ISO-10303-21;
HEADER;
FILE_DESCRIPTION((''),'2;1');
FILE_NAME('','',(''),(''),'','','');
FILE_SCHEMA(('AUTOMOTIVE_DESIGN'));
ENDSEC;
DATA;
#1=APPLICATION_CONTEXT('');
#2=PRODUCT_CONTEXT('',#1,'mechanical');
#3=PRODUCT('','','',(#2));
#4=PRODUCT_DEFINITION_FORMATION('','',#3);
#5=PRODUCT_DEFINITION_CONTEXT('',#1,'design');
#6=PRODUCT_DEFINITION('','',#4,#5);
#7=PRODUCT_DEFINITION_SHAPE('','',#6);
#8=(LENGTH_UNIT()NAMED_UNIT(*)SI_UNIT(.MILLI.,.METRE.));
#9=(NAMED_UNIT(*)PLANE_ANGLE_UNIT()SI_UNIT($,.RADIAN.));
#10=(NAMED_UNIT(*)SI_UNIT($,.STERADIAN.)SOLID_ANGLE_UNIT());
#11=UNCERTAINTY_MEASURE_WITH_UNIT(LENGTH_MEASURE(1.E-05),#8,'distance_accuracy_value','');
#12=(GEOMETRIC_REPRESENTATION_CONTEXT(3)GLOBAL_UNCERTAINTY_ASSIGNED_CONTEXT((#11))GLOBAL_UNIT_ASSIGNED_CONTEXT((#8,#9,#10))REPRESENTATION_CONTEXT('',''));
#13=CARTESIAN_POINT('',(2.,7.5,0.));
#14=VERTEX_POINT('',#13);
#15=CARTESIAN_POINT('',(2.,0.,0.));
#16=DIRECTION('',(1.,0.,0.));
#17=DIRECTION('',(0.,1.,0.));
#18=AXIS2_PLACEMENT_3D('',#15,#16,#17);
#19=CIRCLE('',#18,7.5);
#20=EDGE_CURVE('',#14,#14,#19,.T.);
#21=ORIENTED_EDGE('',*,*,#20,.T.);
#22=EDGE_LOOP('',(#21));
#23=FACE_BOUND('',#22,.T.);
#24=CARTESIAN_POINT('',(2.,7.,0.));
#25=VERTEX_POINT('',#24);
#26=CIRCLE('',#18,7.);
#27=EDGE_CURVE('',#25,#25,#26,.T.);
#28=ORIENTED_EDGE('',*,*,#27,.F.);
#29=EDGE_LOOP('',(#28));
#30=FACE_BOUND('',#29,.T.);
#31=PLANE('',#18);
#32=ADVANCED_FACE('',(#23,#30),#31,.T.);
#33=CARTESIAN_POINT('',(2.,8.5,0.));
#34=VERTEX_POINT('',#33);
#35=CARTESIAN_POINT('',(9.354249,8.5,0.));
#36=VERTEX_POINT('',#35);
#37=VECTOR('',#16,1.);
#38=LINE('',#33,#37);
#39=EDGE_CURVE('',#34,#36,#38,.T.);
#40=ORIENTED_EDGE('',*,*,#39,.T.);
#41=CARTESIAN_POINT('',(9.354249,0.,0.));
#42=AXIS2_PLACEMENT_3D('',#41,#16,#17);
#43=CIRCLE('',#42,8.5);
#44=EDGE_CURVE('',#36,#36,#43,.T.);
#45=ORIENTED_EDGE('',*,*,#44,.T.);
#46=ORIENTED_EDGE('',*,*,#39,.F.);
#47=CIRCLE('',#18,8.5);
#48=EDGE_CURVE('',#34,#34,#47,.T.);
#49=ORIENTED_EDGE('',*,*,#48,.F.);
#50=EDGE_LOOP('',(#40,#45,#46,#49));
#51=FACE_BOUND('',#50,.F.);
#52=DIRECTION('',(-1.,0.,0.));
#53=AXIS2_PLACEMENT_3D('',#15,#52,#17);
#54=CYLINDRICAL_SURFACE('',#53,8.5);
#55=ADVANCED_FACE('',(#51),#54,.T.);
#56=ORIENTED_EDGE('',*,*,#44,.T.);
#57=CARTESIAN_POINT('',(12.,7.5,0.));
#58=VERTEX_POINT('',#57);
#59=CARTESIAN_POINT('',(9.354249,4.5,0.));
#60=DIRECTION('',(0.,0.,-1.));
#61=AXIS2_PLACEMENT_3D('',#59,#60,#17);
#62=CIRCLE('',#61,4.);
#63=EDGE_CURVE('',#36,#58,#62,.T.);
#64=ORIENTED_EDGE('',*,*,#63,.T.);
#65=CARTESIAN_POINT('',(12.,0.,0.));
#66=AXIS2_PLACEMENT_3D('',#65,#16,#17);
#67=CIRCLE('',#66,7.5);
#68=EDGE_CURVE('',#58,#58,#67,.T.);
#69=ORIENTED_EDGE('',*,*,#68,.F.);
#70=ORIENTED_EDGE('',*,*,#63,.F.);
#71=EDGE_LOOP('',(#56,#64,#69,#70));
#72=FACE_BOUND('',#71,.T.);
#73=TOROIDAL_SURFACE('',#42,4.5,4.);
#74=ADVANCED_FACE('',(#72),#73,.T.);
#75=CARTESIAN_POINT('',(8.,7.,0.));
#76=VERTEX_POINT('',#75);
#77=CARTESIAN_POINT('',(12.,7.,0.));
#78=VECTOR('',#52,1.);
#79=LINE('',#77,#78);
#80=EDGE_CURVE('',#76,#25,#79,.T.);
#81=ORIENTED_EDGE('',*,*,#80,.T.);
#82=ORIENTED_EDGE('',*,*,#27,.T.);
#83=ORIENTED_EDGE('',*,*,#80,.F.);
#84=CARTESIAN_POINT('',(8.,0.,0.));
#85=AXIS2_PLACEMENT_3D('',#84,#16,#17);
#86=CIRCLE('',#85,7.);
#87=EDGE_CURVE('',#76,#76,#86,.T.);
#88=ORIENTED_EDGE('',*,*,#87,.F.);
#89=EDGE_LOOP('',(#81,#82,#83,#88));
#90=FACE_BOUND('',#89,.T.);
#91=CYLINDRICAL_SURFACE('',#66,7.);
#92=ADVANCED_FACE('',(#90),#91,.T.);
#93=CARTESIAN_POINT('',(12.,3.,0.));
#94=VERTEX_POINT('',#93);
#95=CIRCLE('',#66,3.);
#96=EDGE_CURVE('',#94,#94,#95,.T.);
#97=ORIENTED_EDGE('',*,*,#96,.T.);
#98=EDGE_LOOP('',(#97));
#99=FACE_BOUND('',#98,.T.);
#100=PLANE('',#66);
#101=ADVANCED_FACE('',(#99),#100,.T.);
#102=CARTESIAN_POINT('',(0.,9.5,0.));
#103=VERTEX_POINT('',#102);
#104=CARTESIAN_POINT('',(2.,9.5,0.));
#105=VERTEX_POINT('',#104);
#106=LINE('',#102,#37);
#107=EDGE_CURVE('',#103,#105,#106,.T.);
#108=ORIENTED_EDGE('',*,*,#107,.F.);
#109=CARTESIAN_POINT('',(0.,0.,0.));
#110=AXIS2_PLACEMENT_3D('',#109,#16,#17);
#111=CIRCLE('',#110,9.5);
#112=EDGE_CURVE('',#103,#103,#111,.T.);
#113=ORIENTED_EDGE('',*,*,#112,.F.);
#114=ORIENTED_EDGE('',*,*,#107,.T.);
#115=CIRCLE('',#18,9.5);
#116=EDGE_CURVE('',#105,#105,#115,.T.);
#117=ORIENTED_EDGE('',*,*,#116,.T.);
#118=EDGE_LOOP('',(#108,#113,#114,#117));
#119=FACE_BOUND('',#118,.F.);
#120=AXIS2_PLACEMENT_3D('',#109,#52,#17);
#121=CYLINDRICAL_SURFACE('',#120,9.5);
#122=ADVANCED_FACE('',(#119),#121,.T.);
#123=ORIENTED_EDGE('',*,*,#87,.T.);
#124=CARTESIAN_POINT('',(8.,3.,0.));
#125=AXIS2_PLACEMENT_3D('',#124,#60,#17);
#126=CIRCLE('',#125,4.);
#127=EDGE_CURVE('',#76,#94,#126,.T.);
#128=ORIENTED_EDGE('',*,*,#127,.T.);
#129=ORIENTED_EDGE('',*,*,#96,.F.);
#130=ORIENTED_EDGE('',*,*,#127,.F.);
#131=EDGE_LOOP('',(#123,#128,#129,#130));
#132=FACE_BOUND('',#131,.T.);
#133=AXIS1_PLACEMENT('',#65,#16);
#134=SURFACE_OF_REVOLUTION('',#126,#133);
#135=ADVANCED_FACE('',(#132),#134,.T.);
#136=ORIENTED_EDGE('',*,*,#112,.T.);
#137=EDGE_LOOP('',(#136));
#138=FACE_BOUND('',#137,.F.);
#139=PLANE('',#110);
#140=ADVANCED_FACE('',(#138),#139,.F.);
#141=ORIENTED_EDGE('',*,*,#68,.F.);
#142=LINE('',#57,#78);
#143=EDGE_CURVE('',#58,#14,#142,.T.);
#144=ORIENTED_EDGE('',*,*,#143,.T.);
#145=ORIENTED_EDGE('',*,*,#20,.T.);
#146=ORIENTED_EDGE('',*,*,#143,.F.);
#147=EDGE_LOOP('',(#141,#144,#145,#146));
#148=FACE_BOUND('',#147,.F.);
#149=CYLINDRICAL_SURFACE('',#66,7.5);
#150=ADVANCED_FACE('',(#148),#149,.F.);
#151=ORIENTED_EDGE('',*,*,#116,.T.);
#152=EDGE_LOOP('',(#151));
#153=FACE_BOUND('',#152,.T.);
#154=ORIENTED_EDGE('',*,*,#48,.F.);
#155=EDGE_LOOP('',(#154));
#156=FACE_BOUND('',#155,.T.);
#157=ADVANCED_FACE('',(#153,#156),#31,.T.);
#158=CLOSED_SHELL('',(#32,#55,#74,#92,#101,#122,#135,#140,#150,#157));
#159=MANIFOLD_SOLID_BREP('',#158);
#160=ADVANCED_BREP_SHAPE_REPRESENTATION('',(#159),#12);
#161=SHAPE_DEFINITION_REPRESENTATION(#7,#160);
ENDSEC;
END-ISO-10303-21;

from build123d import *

# Parameters (mm, degrees)
F0_R     = 9.5
F1_DEPTH = 2
F2_R     = 8.5
F3_DEPTH = 10
F4_R     = 7.5
F4_R_2   = 7
F5_DEPTH = 10


# Not quite as in the source:
# - a fillet or chamfer that OpenCascade refuses, or shapes differently, is made with other operations: its cross-section is extruded or revolved along the edge and cut away or added


with BuildPart() as f1:
    # F0 (on Right) → F1 (new body)
    with BuildSketch(Plane.YZ):
        Circle(F0_R)
    extrude(amount=F1_DEPTH)

    # F2 (on face) → F3 (join)
    with BuildSketch(Plane.YZ.offset(2)):
        Circle(F2_R)
    extrude(amount=F3_DEPTH)

    # F4 (on face) → F5 (cut)
    with BuildSketch(Plane.YZ.offset(12)):
        Circle(F4_R)
        Circle(F4_R_2, mode=Mode.SUBTRACT)
    extrude(amount=-F5_DEPTH, mode=Mode.SUBTRACT)

    # F6: fillet of radius 4 on 2 edges, made by hand

    # F6_s1 → F6_t2 (revolve, cut)
    with BuildSketch(Plane.XY):
        with BuildLine():
            ThreePointArc((8, 7), (10.8284271247, 5.8284271247), (12, 3))
            Line((12, 3), (12, 7))
            Line((12, 7), (8, 7))
        make_face()
    revolve(axis=Axis((12, 0, 0), (1, 0, 0)), mode=Mode.SUBTRACT)

    # F6_s3 → F6_t4 (revolve, cut)
    with BuildSketch(Plane.XY):
        with BuildLine():
            ThreePointArc((9.3542486889, 8.5), (10.7684622513, 8.2416573868), (12, 7.5))
            Line((12, 7.5), (12, 8.5))
            Line((12, 8.5), (9.3542486889, 8.5))
        make_face()
    revolve(axis=Axis((12, 0, 0), (1, 0, 0)), mode=Mode.SUBTRACT)


solid = f1.part
